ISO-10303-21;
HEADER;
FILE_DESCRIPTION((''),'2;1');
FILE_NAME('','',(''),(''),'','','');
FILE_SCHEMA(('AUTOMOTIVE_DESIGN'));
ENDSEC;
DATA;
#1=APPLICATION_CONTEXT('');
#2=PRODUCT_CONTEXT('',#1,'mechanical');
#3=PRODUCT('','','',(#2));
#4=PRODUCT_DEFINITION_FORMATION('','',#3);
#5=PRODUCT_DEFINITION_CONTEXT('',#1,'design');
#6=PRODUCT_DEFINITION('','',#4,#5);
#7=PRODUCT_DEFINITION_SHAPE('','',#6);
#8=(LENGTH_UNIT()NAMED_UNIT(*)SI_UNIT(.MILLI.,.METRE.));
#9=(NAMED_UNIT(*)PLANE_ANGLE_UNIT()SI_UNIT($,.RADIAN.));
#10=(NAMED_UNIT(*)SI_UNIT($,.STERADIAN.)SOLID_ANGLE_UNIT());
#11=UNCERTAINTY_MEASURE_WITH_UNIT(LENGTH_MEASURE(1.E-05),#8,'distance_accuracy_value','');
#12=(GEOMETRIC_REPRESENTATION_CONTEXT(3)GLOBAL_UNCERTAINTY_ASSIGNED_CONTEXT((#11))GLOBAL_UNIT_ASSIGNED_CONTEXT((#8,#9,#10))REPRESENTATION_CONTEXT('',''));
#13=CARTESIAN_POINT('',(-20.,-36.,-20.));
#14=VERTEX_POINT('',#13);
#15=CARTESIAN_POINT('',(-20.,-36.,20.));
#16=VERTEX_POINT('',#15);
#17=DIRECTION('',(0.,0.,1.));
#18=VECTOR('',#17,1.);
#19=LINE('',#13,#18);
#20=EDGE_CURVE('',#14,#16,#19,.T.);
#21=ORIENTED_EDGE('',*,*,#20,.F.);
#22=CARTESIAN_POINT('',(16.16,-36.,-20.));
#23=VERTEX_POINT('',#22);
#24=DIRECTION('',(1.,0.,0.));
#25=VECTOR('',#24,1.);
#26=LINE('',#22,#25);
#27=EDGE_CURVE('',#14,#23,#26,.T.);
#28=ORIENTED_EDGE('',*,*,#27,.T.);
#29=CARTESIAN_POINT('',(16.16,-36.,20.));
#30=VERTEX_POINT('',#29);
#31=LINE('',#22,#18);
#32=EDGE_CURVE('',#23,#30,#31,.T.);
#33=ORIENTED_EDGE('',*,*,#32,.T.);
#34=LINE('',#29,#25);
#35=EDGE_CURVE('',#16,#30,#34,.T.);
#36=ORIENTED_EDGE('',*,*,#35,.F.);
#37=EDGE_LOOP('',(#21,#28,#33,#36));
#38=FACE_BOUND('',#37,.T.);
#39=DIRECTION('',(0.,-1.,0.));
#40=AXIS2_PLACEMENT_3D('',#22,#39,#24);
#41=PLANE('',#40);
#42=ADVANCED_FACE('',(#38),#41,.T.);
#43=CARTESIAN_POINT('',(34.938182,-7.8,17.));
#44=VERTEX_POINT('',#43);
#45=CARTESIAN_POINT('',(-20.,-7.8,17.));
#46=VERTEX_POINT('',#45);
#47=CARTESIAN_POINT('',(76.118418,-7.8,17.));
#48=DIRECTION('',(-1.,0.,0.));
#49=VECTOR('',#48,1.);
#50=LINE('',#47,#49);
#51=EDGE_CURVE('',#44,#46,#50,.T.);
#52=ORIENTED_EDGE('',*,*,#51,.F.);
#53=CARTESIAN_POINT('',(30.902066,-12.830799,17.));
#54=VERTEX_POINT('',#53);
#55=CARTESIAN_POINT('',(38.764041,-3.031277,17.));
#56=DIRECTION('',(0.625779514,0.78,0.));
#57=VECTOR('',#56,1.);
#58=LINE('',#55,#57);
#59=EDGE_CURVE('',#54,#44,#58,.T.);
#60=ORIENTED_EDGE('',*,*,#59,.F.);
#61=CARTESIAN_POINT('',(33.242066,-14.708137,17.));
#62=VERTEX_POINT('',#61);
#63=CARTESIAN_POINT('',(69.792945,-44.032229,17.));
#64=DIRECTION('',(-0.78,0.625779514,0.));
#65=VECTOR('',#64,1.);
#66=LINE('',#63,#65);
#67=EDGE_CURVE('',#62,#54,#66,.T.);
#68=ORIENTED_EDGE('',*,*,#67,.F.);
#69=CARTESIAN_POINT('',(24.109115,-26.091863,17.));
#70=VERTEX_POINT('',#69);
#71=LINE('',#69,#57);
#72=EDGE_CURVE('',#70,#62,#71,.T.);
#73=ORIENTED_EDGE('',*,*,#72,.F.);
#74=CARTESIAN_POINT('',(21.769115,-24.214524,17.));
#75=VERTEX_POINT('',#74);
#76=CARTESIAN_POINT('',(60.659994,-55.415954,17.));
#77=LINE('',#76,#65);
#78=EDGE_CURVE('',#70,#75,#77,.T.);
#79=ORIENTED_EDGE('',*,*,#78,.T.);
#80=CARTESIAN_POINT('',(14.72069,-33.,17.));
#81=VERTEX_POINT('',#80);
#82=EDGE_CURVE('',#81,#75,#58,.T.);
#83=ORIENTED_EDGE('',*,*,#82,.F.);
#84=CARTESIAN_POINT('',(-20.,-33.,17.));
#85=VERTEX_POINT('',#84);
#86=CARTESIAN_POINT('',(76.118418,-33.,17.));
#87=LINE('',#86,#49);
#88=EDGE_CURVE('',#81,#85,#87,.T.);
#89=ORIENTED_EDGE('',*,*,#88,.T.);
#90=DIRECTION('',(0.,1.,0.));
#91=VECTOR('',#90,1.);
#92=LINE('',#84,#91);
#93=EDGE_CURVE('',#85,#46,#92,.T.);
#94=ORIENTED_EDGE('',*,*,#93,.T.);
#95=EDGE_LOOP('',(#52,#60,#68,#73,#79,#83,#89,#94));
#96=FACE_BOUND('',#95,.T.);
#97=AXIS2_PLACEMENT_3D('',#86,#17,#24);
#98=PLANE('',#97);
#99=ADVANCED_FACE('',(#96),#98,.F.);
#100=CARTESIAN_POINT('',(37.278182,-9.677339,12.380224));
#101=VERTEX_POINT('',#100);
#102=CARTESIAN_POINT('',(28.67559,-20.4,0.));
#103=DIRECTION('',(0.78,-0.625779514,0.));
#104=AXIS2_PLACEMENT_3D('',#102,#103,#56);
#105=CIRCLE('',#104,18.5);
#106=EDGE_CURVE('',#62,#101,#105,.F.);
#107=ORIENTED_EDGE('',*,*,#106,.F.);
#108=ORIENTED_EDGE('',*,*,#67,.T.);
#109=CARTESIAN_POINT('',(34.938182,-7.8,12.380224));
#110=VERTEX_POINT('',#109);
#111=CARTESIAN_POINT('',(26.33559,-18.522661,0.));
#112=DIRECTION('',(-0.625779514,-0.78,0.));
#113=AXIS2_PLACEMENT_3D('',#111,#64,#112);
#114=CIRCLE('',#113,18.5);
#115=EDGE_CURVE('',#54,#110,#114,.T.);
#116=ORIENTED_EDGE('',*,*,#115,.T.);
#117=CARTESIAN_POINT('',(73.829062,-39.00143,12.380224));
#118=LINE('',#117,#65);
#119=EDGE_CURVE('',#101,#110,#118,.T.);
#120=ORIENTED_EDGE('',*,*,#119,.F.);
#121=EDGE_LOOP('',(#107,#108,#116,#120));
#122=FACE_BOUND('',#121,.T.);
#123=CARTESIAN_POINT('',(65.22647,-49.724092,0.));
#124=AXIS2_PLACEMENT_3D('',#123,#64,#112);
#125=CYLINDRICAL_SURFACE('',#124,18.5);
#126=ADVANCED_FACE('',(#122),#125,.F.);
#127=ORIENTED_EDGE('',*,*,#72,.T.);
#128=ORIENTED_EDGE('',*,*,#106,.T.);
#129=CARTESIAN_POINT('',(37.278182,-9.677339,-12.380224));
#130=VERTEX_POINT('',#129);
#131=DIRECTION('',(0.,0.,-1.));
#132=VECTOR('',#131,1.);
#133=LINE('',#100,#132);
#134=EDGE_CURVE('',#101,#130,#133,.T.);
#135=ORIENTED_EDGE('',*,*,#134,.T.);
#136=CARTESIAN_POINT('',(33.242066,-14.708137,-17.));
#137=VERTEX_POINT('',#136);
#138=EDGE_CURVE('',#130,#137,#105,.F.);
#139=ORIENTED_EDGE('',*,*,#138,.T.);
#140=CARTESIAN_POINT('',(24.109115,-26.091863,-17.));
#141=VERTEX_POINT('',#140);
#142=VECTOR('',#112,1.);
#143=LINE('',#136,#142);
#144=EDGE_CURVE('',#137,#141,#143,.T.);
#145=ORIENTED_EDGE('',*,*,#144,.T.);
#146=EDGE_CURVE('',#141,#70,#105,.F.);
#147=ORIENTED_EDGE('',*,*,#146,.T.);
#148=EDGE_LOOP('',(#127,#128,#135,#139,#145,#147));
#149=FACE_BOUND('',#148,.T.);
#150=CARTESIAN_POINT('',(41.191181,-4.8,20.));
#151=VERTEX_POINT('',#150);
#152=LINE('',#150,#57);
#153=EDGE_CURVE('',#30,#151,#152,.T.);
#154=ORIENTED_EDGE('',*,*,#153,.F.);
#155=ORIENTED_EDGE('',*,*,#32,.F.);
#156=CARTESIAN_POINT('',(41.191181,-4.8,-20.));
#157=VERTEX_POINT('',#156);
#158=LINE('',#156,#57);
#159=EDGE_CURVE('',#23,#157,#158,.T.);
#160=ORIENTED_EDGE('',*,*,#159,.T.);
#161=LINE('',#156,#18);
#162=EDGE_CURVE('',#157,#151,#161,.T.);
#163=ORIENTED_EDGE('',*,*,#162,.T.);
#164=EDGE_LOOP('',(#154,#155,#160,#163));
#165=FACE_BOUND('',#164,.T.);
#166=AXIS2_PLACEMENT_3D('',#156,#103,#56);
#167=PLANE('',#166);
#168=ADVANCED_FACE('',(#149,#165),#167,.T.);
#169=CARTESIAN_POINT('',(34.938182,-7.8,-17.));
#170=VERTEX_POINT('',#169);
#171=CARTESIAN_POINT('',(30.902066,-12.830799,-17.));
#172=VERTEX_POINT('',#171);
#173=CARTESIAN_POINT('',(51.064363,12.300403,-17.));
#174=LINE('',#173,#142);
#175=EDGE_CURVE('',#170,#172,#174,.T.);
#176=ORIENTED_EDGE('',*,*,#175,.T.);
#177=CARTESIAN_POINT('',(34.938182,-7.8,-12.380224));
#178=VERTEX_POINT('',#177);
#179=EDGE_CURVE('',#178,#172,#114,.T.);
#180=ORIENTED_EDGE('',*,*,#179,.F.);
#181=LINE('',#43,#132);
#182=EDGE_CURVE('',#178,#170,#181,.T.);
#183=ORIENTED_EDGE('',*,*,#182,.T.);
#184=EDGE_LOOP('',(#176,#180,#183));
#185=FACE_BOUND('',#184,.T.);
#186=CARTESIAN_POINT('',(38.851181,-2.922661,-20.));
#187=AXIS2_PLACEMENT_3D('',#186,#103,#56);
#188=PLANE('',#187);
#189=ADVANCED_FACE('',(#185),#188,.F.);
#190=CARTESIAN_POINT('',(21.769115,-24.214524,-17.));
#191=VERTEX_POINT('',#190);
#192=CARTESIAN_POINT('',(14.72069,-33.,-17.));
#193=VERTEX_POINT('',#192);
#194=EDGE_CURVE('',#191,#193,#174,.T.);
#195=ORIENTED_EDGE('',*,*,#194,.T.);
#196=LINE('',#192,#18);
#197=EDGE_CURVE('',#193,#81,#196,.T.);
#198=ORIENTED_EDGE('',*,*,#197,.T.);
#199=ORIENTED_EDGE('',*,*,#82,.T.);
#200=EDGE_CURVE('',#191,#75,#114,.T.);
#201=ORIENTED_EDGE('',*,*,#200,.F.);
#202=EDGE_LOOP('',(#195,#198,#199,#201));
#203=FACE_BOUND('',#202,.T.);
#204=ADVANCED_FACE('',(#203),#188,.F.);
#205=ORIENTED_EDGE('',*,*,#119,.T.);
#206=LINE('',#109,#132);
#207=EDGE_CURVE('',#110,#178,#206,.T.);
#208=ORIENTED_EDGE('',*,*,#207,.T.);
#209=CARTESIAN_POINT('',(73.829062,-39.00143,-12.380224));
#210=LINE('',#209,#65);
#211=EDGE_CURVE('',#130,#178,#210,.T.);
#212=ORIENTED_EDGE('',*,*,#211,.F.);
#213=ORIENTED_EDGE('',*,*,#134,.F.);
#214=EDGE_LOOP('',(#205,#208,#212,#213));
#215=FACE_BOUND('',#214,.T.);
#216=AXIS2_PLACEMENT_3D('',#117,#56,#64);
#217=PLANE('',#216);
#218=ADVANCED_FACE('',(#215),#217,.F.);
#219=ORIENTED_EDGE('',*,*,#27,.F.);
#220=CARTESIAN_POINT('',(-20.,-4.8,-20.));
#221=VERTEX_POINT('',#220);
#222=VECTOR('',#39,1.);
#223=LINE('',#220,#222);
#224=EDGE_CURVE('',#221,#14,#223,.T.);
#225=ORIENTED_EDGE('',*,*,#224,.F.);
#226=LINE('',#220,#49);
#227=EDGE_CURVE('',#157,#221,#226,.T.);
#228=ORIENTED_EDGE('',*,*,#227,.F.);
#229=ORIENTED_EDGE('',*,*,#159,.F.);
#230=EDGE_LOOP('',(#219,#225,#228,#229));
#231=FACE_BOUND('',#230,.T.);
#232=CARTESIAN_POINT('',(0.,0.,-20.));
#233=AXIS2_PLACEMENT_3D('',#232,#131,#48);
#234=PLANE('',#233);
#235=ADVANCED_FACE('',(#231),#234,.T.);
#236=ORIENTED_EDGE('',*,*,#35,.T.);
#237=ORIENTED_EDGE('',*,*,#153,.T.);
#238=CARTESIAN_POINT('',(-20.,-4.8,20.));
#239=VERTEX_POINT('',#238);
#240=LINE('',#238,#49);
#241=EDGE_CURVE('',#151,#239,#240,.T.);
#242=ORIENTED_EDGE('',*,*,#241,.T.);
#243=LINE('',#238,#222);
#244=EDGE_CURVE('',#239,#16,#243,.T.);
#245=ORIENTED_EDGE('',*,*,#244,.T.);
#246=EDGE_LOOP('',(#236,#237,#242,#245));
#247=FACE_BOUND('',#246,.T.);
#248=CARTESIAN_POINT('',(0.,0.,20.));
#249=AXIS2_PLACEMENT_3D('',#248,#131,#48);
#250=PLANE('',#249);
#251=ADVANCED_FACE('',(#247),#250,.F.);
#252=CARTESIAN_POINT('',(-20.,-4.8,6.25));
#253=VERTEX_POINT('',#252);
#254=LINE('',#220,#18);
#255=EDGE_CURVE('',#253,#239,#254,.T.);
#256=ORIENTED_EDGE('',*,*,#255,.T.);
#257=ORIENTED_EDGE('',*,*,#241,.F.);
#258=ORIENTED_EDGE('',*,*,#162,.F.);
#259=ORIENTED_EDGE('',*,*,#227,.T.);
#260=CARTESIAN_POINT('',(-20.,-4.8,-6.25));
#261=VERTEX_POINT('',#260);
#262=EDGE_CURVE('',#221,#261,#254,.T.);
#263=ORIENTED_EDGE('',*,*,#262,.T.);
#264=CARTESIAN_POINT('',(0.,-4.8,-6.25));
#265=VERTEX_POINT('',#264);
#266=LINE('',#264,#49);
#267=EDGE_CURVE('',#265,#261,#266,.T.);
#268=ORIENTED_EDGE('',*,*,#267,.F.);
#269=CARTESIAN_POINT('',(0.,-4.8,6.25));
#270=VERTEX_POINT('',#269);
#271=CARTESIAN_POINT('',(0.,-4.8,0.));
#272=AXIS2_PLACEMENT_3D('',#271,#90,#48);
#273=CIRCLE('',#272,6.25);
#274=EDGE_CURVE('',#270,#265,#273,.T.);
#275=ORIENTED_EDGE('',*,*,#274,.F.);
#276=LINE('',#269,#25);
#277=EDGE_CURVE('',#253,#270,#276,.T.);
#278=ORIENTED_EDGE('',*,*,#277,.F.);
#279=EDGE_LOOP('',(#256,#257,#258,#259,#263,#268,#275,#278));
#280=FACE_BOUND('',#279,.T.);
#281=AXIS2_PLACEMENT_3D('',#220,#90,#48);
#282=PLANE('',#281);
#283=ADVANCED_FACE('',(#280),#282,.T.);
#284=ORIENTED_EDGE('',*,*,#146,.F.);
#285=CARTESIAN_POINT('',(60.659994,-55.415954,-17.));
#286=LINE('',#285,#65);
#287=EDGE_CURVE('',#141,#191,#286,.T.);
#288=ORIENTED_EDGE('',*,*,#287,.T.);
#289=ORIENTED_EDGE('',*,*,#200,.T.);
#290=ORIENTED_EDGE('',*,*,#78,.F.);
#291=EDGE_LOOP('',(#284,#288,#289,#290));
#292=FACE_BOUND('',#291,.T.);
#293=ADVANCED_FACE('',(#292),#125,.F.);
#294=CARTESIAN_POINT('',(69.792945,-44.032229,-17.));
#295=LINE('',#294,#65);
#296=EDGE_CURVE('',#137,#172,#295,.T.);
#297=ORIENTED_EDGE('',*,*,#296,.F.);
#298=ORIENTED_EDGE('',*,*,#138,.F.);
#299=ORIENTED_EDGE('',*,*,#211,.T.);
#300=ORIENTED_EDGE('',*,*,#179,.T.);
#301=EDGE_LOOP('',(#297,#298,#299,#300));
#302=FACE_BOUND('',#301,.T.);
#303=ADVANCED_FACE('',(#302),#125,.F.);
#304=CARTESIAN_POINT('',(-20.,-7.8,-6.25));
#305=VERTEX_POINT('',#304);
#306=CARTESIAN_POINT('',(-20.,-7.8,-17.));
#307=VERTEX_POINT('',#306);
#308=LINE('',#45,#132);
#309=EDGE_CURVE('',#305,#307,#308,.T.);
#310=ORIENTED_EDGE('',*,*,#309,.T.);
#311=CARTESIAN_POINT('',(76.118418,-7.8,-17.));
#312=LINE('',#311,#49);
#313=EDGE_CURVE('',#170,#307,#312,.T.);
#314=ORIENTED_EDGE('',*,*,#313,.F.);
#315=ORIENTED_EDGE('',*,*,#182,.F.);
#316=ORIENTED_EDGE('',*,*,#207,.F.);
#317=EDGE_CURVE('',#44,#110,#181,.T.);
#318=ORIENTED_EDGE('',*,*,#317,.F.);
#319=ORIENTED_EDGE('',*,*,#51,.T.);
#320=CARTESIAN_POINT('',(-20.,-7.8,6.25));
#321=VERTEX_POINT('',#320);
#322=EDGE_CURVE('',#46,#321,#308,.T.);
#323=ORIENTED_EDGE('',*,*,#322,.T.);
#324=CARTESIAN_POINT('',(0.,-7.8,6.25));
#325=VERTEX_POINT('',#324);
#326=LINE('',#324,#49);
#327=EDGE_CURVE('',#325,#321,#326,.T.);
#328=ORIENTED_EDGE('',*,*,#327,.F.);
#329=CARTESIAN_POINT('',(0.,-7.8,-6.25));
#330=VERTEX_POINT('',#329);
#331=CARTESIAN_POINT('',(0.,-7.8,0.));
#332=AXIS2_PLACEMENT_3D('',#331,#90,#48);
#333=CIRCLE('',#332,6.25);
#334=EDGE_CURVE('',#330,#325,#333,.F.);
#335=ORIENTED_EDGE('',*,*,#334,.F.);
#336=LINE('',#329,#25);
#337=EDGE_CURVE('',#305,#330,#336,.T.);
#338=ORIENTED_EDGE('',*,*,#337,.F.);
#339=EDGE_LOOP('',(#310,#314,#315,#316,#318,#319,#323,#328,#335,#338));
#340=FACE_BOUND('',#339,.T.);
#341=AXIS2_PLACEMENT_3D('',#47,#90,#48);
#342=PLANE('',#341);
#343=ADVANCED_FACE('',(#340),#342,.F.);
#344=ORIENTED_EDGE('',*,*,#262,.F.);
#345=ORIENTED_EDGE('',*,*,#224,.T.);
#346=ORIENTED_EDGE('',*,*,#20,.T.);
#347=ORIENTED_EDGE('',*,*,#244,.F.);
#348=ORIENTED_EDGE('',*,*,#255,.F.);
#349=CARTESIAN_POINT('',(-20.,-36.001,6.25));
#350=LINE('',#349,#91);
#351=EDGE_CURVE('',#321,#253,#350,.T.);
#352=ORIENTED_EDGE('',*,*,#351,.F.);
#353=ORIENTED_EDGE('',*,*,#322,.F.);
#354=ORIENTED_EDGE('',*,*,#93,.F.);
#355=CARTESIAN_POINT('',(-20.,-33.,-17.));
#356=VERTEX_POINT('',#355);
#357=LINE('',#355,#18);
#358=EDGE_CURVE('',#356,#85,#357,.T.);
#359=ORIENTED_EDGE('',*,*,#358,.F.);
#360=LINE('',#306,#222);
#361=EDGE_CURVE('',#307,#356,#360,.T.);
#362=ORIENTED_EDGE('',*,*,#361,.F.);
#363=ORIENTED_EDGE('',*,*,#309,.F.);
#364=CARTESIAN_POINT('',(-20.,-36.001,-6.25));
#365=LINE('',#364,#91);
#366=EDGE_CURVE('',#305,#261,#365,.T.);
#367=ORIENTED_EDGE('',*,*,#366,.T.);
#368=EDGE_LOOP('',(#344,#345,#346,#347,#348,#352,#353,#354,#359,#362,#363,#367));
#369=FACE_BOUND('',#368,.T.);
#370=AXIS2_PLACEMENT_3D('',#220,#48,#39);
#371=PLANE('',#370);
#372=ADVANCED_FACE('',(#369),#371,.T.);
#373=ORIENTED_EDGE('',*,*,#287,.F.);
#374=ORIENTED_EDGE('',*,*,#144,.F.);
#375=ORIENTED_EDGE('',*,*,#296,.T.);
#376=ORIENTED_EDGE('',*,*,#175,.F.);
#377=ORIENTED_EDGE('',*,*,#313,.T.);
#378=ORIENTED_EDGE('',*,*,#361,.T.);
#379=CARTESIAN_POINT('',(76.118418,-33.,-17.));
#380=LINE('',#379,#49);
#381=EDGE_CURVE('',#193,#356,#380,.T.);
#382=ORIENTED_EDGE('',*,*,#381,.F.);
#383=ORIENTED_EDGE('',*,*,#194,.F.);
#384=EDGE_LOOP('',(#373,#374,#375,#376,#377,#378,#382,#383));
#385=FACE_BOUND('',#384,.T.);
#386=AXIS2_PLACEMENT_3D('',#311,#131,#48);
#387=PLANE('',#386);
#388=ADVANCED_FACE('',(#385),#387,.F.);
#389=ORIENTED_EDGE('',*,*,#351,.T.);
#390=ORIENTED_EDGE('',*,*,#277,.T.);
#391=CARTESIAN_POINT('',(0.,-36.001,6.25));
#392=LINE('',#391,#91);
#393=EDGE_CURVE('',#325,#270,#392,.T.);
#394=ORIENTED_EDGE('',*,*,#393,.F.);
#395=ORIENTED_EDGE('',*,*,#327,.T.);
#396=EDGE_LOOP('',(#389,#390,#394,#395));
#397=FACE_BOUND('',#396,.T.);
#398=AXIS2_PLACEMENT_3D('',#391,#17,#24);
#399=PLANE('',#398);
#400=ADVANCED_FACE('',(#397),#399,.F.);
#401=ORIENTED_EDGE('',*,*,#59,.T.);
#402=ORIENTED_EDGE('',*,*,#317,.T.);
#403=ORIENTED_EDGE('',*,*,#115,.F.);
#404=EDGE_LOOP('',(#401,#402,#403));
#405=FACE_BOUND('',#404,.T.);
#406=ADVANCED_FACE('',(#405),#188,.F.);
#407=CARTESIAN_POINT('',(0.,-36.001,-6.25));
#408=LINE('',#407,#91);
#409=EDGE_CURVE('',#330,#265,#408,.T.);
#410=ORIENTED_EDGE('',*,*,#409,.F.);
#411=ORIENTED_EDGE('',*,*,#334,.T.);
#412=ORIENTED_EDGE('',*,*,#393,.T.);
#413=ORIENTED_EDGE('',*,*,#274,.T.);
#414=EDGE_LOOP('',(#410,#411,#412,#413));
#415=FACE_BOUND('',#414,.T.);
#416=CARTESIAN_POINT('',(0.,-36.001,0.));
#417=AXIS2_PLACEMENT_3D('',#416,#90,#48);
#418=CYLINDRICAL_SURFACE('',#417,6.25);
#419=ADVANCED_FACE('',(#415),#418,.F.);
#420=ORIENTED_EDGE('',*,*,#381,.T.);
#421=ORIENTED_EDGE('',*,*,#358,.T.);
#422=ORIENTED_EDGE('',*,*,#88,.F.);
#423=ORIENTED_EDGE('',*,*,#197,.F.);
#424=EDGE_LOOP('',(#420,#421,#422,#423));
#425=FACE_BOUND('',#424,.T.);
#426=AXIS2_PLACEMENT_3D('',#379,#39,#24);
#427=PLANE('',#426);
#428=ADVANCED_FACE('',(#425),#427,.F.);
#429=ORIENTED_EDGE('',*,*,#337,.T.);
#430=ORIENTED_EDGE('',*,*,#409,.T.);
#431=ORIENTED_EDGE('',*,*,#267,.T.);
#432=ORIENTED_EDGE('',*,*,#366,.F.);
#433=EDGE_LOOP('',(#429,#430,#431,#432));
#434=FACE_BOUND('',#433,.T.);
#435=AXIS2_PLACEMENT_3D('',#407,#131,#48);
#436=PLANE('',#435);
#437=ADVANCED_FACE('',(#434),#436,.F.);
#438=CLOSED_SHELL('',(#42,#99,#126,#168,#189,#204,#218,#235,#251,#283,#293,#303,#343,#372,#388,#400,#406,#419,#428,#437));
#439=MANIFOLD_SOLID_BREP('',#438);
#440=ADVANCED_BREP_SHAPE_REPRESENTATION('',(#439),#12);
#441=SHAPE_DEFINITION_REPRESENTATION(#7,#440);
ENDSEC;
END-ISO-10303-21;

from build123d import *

# Parameters (mm, degrees)
BOSS_EXTRUDE1_DEPTH      = 20
BOSS_EXTRUDE1_DEPTH_BACK = 20
CUT_EXTRUDE1_REACH       = 75.759
SKETCH3_W                = 34
SKETCH3_H                = 25.2
CUT_EXTRUDE2_DEPTH       = 3
CUT_EXTRUDE3_REACH       = 57.409


with BuildPart() as part:
    # Sketch1 → Boss-Extrude1 (new, two sides: drawn at the far end of the back side and taken through both)
    with BuildSketch(Plane.XY.offset(-BOSS_EXTRUDE1_DEPTH_BACK)):
        Polygon((-20, -4.8), (41.191180555, -4.8), (16.16, -36), (-20, -36), align=None)
    extrude(amount=BOSS_EXTRUDE1_DEPTH + BOSS_EXTRUDE1_DEPTH_BACK)

    # Cut-Extrude1: up to this plane
    cut_extrude1_end = Plane(origin=(38.851180555, -2.922661458, -20), z_dir=(0.7799999999999999, -0.6257795138864808, 0))
    # Sketch3 → Cut-Extrude1 (cut, up to the surface)
    with BuildSketch(Plane.ZY.offset(20), mode=Mode.PRIVATE) as cut_extrude1_sk1:
        with Locations((0, -20.4)):
            Rectangle(SKETCH3_W, SKETCH3_H)
    cut_extrude1_tool1 = split(extrude(cut_extrude1_sk1.sketch, amount=-CUT_EXTRUDE1_REACH, mode=Mode.PRIVATE), bisect_by=cut_extrude1_end, keep=Keep.BOTH, mode=Mode.PRIVATE)
    add(cut_extrude1_tool1.solids().sort_by_distance((-20, -20.4, 0))[0], mode=Mode.SUBTRACT)

    # Sketch4 → Cut-Extrude2 (cut)
    with BuildSketch(Plane(origin=(25.06363275, -20.108087075, 0), x_dir=(0, 0, 1), z_dir=(-0.78, 0.6257795138864807, 0))):
        with BuildLine():
            Line((-17, 9.329856704), (-17, -5.264662815))
            ThreePointArc((-17, -5.264662815), (0, -16.467403056), (17, -5.264662815))
            Line((17, -5.264662815), (17, 9.329856704))
            ThreePointArc((17, 9.329856704), (15.039919545, 12.805285563), (12.38022373, 15.779598814))
            Line((12.38022373, 15.779598814), (-12.38022373, 15.779598814))
            ThreePointArc((-12.38022373, 15.779598814), (-15.039919545, 12.805285563), (-17, 9.329856704))
        make_face()
    extrude(amount=-CUT_EXTRUDE2_DEPTH, mode=Mode.SUBTRACT)

    # Sketch5 → Cut-Extrude3 (cut, up to next)
    with BuildSketch(Plane(origin=(0, -4.8, 0), x_dir=(1, 0, 0), z_dir=(0, 1, 0)), mode=Mode.PRIVATE) as cut_extrude3_sk1:
        with BuildLine():
            Line((0, 6.25), (-20, 6.25))
            Line((-20, 6.25), (-20, -6.25))
            Line((-20, -6.25), (0, -6.25))
            ThreePointArc((0, -6.25), (6.25, 0), (0, 6.25))
        make_face()
    cut_extrude3_tool1 = extrude(cut_extrude3_sk1.sketch, amount=-CUT_EXTRUDE3_REACH, mode=Mode.PRIVATE) & part.part
    add(cut_extrude3_tool1.solids().sort_by_distance((-7.506569, -4.8, 0))[0], mode=Mode.SUBTRACT)


solid = part.part
